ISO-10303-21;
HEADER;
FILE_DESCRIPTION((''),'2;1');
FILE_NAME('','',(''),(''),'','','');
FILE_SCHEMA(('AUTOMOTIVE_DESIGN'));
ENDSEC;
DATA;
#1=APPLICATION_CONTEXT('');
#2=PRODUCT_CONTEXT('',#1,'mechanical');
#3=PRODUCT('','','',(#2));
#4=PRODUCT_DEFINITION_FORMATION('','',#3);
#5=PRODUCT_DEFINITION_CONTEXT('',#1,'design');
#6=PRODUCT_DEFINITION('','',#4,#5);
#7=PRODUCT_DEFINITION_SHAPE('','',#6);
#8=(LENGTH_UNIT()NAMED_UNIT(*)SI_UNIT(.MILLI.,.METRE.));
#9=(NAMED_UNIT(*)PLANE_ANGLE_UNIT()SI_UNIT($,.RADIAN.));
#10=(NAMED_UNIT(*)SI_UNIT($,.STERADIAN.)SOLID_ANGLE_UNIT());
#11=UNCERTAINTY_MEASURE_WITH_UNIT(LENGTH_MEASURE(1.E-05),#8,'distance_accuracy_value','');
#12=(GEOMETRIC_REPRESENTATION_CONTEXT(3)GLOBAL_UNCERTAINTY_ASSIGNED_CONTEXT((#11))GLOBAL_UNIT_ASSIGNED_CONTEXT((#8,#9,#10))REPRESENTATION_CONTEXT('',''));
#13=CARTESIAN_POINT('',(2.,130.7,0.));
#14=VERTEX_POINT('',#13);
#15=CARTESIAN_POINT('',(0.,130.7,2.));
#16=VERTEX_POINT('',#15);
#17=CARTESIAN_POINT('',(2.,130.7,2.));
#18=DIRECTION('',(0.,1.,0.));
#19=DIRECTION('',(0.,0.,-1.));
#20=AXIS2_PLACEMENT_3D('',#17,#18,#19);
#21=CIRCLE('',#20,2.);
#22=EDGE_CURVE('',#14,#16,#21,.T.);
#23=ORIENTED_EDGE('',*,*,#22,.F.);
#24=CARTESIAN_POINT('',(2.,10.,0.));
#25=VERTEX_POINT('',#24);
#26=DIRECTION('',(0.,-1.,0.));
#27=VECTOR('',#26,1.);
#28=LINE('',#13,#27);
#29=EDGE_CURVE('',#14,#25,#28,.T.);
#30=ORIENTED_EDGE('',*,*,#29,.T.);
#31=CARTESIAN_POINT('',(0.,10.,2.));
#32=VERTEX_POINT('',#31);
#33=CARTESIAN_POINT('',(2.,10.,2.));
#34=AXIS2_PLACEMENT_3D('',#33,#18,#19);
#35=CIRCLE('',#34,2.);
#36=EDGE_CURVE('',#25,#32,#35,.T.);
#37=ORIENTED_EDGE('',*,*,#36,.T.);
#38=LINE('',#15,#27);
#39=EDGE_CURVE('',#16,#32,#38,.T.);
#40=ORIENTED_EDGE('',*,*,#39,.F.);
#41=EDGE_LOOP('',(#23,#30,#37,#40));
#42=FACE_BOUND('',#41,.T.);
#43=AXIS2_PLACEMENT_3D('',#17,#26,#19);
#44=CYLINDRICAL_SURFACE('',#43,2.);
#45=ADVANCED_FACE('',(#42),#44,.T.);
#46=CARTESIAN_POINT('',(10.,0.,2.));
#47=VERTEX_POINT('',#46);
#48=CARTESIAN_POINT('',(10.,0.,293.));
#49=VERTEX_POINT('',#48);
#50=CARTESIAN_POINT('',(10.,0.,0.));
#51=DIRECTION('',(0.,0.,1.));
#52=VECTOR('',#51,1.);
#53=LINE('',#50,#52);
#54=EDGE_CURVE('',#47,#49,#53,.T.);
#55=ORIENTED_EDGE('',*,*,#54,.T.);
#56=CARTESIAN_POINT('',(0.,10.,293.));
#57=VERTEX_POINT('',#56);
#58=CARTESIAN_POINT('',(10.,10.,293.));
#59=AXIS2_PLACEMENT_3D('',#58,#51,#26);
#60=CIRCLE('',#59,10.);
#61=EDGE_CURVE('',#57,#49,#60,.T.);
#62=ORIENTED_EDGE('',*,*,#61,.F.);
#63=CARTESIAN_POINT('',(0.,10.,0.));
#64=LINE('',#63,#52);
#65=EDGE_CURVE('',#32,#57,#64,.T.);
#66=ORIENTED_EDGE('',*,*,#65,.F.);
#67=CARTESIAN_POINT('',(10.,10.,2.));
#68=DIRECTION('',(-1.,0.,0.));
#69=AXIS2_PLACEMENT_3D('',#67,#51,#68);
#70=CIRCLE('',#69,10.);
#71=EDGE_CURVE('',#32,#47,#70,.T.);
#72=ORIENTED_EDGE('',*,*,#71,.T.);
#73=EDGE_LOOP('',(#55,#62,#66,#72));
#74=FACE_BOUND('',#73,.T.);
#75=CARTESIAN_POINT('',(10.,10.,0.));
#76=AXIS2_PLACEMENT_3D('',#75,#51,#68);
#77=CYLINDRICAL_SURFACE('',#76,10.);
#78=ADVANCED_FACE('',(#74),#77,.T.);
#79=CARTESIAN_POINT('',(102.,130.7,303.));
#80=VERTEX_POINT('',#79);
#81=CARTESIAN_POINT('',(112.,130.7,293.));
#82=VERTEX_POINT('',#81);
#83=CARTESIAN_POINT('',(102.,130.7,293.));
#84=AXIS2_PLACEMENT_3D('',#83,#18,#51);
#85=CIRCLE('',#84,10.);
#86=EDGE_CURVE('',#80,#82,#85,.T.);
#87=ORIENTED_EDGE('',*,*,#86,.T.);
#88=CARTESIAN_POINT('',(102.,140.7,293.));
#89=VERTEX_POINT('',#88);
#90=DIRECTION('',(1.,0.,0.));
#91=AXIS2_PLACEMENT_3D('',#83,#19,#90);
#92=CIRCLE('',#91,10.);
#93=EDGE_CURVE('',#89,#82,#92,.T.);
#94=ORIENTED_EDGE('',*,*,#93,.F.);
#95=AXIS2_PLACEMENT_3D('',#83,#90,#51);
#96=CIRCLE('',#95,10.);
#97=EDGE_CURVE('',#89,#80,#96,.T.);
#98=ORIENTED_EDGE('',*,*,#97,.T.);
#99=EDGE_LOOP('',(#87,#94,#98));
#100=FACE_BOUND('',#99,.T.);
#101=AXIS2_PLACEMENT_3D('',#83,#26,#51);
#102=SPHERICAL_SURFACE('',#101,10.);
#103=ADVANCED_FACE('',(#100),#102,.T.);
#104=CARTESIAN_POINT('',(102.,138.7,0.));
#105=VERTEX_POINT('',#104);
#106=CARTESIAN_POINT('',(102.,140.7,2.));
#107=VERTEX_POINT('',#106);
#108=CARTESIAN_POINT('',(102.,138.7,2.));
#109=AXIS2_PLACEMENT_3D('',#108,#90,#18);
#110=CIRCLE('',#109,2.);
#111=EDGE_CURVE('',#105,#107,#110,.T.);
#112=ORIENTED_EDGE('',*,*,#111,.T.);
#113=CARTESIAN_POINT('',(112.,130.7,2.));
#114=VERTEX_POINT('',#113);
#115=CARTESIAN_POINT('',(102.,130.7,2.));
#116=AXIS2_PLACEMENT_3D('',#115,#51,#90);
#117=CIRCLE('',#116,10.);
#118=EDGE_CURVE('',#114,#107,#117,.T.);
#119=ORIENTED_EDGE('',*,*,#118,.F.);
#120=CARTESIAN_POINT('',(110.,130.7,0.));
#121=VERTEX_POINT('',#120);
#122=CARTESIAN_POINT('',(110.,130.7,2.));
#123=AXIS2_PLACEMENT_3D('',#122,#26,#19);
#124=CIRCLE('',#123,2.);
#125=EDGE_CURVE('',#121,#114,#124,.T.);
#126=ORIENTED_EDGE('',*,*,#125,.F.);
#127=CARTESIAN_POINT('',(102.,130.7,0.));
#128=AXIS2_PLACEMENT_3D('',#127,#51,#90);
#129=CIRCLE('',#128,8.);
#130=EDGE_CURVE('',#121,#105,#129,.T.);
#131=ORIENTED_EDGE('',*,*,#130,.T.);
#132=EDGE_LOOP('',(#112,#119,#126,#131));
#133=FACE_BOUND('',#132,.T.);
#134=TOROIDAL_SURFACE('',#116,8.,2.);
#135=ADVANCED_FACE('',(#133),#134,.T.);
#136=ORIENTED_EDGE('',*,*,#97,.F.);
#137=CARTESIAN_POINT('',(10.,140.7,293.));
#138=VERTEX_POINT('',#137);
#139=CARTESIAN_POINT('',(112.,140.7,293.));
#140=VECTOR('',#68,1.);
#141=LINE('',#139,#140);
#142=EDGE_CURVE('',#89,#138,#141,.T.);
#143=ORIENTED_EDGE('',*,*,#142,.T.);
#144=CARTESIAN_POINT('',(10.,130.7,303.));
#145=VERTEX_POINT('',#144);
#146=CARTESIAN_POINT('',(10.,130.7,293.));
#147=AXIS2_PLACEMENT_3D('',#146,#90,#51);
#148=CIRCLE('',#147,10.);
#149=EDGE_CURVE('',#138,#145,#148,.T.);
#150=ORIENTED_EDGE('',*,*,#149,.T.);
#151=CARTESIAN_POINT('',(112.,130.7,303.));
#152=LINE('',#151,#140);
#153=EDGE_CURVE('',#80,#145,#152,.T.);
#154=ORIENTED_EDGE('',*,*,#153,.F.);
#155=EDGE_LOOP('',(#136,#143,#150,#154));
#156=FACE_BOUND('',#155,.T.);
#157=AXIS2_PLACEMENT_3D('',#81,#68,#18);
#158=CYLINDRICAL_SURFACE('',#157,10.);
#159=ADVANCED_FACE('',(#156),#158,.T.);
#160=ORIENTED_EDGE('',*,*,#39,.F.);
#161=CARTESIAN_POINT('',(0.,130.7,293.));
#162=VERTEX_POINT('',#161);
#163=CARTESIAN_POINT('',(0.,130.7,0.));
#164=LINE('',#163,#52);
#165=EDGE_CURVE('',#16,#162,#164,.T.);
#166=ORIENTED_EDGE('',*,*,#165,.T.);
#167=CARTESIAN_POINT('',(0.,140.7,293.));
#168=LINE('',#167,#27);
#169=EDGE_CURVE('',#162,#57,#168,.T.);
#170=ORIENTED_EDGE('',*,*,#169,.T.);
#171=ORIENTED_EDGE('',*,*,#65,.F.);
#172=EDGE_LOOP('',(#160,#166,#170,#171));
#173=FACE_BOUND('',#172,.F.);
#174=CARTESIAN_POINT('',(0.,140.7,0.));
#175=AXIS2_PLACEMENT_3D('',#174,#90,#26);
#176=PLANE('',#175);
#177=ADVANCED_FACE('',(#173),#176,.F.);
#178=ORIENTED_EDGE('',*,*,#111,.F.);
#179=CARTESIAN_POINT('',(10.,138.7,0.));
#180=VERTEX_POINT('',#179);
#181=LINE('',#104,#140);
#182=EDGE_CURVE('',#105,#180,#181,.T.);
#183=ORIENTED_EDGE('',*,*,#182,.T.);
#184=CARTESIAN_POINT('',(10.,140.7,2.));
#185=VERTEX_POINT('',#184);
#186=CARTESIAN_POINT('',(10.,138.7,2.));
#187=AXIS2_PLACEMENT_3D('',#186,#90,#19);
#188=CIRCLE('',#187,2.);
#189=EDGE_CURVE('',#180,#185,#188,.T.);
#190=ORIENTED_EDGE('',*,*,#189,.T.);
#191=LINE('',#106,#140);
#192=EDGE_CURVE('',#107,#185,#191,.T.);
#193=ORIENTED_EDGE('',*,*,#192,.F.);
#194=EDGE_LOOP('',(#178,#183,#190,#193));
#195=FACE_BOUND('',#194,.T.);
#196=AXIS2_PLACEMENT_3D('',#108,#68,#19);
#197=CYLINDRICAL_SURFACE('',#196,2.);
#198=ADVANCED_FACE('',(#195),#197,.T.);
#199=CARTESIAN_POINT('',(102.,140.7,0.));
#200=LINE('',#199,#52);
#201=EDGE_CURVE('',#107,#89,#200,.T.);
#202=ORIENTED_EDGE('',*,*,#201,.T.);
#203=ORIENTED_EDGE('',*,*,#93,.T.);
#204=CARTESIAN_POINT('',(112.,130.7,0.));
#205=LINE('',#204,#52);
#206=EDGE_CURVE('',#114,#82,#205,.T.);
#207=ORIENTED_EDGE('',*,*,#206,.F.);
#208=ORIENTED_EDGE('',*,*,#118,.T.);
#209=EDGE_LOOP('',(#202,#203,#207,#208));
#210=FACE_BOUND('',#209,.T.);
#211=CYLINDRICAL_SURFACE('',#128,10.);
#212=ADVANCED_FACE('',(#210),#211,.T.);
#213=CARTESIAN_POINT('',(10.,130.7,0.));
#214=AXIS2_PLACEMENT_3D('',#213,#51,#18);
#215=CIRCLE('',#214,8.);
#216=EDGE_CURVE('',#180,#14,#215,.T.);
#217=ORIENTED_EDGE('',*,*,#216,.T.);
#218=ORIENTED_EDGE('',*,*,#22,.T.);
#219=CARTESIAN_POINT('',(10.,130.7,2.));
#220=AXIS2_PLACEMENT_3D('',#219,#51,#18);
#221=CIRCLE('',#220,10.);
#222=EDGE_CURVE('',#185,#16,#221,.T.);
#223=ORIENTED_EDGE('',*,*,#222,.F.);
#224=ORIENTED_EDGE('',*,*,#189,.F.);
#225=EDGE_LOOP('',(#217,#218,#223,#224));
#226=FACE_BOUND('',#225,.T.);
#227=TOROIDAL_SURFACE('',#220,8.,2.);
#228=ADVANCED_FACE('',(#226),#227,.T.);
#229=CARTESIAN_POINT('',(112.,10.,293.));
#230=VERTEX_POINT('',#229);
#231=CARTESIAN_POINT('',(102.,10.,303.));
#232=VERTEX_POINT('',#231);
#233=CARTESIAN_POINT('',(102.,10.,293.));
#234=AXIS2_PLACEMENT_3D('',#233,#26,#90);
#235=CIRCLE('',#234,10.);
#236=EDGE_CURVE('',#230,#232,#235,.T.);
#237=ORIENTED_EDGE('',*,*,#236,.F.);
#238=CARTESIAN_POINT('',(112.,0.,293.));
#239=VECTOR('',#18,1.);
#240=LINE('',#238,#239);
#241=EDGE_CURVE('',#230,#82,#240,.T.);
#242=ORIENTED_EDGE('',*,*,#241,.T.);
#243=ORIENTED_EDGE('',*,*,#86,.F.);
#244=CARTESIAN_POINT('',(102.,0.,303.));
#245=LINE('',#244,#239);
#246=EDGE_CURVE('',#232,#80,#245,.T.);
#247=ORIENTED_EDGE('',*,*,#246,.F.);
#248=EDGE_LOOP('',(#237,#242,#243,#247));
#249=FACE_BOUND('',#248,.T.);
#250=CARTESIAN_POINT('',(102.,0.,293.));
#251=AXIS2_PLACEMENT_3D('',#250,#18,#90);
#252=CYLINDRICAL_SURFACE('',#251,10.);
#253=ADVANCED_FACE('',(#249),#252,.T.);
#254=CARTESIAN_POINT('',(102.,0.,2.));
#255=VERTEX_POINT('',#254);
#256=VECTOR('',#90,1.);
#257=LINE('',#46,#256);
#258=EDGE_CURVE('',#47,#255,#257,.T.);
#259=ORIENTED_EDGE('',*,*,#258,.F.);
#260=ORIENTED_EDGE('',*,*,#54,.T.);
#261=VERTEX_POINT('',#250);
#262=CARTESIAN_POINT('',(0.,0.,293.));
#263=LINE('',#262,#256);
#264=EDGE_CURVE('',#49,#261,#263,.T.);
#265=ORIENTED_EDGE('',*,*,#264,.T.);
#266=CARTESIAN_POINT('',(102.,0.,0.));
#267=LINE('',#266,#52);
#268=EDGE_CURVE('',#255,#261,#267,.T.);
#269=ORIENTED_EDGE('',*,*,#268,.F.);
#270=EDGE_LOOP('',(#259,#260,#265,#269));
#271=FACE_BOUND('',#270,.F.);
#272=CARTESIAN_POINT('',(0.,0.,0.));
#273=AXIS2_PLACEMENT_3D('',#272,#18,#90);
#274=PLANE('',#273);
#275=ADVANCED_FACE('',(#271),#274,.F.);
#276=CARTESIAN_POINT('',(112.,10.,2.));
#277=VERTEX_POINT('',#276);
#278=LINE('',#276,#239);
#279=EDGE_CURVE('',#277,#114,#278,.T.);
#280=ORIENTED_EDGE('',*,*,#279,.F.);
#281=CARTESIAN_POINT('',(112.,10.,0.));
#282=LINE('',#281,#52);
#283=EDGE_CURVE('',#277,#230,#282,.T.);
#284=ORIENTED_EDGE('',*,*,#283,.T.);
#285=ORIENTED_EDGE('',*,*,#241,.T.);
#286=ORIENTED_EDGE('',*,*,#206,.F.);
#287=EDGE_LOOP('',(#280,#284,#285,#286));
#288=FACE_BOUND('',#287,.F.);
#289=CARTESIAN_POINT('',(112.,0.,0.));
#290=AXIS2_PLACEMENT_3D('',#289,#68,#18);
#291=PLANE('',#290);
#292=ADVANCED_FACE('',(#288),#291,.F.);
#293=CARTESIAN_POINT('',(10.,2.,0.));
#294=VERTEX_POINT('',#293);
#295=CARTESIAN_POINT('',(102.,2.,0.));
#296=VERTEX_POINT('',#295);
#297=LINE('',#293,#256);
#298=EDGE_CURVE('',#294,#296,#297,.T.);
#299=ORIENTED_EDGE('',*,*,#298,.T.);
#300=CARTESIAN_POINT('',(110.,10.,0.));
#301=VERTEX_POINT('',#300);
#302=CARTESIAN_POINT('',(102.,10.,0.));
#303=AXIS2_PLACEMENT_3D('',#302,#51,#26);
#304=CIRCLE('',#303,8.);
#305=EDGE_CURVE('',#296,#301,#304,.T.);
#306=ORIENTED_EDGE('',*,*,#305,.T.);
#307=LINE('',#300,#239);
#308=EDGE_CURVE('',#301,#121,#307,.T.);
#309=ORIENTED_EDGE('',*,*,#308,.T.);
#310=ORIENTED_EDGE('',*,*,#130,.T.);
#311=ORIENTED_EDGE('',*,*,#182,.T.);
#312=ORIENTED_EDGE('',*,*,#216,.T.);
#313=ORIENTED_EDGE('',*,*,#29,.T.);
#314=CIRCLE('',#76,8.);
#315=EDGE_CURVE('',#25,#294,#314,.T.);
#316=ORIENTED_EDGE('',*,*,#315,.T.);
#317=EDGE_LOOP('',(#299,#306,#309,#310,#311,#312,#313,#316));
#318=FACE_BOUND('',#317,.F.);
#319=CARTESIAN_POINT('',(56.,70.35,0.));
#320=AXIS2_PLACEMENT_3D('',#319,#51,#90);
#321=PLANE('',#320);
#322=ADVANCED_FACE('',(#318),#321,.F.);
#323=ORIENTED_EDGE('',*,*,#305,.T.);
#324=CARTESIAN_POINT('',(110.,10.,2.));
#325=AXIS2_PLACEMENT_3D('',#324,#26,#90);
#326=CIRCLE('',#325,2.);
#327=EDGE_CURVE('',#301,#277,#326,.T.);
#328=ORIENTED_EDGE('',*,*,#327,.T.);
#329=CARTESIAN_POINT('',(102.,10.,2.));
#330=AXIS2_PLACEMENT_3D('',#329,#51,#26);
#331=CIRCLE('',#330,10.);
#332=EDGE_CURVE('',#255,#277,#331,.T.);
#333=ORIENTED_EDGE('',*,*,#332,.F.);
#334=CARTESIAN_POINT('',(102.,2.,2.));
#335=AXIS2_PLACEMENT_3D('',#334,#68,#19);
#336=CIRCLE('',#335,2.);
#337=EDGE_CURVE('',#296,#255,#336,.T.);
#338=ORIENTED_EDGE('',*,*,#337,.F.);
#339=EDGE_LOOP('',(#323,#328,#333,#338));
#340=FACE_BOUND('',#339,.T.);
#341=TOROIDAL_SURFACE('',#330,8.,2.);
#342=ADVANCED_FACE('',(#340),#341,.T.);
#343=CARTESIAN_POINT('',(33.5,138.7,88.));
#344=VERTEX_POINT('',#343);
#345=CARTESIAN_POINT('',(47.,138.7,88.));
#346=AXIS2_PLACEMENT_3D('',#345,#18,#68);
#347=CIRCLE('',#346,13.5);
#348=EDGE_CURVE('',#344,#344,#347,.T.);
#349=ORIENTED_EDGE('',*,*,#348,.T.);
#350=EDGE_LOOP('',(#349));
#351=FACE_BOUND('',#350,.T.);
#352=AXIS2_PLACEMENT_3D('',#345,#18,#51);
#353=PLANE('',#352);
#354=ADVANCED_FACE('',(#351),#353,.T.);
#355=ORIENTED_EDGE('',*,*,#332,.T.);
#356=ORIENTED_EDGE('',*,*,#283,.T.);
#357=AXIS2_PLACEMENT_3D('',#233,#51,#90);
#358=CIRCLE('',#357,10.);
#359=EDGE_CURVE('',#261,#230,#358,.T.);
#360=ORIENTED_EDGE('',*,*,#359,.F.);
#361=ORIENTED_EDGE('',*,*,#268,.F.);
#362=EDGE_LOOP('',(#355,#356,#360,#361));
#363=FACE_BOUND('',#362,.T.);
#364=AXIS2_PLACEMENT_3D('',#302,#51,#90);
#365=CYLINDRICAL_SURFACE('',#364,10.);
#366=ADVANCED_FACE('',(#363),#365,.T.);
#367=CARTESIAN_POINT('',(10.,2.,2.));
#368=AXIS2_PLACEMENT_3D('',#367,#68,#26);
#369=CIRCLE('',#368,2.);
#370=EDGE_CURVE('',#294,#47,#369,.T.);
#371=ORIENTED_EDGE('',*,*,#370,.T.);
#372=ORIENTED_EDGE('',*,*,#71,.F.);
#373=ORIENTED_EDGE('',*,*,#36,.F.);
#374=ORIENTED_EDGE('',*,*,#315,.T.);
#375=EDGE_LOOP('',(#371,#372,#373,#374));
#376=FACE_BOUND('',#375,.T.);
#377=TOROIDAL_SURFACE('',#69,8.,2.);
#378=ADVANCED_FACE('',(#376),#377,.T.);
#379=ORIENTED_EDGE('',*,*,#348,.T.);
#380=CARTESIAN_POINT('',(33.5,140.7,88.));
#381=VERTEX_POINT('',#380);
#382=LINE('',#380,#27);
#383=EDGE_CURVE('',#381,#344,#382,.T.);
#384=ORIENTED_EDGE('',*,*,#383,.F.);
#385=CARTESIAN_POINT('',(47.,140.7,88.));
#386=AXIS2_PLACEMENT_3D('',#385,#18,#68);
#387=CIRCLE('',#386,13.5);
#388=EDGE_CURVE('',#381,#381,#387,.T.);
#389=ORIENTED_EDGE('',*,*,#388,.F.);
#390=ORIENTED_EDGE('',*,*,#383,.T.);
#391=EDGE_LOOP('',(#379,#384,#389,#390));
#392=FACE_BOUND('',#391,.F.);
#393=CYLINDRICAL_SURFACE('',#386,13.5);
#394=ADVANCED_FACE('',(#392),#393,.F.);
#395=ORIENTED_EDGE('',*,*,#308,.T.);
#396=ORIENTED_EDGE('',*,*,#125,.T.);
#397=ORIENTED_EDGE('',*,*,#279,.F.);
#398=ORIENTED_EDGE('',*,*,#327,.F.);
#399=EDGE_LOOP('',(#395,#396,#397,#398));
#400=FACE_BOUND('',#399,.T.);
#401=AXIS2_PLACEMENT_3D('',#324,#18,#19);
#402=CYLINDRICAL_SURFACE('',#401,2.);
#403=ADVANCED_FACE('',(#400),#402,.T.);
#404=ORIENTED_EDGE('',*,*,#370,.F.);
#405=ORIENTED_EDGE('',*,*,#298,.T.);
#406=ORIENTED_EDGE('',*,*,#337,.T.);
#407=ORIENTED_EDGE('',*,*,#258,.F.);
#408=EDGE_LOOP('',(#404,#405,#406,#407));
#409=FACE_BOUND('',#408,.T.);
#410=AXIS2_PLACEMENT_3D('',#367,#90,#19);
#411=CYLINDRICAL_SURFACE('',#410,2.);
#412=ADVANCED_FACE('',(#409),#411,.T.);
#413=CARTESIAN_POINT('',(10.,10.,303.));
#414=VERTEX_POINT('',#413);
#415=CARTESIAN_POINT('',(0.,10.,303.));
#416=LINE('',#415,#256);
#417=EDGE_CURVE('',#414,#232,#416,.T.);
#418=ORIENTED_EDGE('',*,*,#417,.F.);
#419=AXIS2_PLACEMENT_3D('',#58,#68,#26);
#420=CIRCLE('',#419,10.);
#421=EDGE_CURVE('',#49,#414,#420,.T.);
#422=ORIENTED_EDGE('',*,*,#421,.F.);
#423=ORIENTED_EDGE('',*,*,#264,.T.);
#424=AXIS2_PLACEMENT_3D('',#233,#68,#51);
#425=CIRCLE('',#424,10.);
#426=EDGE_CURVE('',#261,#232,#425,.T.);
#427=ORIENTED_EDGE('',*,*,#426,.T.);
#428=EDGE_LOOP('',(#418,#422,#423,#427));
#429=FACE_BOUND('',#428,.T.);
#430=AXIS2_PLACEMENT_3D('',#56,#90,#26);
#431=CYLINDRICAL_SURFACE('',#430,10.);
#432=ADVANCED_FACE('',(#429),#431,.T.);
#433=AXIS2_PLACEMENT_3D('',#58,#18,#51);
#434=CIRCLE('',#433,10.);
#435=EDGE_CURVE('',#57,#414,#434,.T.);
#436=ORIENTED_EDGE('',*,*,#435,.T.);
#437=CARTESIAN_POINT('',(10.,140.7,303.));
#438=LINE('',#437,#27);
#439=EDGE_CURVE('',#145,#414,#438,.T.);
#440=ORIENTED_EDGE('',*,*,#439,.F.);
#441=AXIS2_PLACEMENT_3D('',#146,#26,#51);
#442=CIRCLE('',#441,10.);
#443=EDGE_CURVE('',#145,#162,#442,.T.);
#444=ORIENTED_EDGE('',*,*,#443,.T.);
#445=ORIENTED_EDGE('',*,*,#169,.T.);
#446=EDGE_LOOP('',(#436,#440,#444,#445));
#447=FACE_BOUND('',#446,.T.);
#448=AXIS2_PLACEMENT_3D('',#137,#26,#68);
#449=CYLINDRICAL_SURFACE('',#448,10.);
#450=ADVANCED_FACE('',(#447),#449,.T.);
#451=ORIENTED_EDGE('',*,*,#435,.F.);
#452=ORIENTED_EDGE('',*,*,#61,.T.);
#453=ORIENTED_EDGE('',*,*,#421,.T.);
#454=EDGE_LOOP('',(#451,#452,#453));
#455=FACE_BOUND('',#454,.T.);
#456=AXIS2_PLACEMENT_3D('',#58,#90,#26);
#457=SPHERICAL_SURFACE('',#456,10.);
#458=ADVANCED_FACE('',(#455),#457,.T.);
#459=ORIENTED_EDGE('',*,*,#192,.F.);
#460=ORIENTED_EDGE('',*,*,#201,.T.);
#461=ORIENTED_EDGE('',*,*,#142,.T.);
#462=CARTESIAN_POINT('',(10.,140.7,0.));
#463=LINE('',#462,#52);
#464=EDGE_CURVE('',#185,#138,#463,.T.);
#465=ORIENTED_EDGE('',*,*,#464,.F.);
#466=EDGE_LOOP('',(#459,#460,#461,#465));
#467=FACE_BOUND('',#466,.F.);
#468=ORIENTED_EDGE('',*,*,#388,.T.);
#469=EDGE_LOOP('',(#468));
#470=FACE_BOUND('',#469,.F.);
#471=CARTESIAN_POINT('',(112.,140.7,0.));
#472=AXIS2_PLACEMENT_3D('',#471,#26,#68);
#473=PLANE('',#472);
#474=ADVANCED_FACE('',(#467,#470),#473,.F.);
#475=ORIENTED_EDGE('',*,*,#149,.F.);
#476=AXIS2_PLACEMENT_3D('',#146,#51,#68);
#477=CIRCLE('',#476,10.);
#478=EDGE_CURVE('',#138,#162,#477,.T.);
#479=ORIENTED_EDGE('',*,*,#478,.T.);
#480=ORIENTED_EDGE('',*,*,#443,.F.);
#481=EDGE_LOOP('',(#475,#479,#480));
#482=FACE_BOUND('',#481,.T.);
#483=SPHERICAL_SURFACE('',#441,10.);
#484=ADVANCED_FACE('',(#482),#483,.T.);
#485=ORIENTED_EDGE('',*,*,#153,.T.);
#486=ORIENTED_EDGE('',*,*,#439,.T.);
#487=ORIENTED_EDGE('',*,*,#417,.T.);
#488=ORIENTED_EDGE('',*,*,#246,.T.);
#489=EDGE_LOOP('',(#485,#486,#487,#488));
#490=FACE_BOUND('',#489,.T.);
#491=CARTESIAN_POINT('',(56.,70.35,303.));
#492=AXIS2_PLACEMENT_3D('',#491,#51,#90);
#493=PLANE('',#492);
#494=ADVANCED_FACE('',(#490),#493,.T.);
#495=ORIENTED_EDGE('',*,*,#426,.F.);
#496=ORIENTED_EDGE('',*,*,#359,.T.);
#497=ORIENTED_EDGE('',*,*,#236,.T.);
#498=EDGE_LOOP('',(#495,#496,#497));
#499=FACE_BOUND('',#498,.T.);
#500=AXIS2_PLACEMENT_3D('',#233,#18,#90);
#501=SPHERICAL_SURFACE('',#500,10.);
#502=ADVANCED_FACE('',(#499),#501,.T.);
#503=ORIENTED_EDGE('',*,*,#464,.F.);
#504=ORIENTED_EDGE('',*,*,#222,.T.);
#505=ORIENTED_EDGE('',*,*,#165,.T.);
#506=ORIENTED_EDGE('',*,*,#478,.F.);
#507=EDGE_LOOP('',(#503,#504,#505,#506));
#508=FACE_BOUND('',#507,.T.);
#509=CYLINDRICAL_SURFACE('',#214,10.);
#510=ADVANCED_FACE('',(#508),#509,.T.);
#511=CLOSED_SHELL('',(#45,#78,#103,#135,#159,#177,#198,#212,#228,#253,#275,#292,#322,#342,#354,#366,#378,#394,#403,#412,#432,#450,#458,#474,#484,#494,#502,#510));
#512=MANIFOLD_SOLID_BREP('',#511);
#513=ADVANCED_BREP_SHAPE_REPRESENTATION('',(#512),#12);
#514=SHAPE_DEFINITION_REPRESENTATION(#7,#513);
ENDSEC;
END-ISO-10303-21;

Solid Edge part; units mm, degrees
sketch "Sketch1" plane through (0, 0, 0) normal (0, 0, 1) x (1, 0, 0)
  line L0 (112, 0) -> (112, 140.7)
  line L1 (112, 140.7) -> (0, 140.7)
  line L2 (0, 140.7) -> (0, 0)
  line L3 (0, 0) -> (112, 0)
extrude "Protrusion1" add sketch "Sketch1" along normal blind 303
fillet "Round_3" radius 10 8 edges at (112, 70.35, 303) (112, 0, 151.5) (56, 0, 303) (0, 0, 151.5) (0, 70.35, 303) (56, 140.7, 303) (0, 140.7, 151.5) (112, 140.7, 151.5)
fillet "Round_4" radius 2 7 edges at (0, 70.35, 0) (2.9289, 137.7711, 0) (56, 140.7, 0) (112, 70.35, 0) (109.0711, 2.9289, 0) (56, 0, 0) (2.9289, 2.9289, 0)
sketch "Sketch2" plane through (56, 140.7, 147.5) normal (0, 1, 0) x (-1, 0, 0)
  circle A0 centre (9, -59.5) radius 13.5
  dimension "D1" = 86
  dimension "D2" = 65
extrude "hole" cut sketch "Sketch2" along normal mid plane 4
